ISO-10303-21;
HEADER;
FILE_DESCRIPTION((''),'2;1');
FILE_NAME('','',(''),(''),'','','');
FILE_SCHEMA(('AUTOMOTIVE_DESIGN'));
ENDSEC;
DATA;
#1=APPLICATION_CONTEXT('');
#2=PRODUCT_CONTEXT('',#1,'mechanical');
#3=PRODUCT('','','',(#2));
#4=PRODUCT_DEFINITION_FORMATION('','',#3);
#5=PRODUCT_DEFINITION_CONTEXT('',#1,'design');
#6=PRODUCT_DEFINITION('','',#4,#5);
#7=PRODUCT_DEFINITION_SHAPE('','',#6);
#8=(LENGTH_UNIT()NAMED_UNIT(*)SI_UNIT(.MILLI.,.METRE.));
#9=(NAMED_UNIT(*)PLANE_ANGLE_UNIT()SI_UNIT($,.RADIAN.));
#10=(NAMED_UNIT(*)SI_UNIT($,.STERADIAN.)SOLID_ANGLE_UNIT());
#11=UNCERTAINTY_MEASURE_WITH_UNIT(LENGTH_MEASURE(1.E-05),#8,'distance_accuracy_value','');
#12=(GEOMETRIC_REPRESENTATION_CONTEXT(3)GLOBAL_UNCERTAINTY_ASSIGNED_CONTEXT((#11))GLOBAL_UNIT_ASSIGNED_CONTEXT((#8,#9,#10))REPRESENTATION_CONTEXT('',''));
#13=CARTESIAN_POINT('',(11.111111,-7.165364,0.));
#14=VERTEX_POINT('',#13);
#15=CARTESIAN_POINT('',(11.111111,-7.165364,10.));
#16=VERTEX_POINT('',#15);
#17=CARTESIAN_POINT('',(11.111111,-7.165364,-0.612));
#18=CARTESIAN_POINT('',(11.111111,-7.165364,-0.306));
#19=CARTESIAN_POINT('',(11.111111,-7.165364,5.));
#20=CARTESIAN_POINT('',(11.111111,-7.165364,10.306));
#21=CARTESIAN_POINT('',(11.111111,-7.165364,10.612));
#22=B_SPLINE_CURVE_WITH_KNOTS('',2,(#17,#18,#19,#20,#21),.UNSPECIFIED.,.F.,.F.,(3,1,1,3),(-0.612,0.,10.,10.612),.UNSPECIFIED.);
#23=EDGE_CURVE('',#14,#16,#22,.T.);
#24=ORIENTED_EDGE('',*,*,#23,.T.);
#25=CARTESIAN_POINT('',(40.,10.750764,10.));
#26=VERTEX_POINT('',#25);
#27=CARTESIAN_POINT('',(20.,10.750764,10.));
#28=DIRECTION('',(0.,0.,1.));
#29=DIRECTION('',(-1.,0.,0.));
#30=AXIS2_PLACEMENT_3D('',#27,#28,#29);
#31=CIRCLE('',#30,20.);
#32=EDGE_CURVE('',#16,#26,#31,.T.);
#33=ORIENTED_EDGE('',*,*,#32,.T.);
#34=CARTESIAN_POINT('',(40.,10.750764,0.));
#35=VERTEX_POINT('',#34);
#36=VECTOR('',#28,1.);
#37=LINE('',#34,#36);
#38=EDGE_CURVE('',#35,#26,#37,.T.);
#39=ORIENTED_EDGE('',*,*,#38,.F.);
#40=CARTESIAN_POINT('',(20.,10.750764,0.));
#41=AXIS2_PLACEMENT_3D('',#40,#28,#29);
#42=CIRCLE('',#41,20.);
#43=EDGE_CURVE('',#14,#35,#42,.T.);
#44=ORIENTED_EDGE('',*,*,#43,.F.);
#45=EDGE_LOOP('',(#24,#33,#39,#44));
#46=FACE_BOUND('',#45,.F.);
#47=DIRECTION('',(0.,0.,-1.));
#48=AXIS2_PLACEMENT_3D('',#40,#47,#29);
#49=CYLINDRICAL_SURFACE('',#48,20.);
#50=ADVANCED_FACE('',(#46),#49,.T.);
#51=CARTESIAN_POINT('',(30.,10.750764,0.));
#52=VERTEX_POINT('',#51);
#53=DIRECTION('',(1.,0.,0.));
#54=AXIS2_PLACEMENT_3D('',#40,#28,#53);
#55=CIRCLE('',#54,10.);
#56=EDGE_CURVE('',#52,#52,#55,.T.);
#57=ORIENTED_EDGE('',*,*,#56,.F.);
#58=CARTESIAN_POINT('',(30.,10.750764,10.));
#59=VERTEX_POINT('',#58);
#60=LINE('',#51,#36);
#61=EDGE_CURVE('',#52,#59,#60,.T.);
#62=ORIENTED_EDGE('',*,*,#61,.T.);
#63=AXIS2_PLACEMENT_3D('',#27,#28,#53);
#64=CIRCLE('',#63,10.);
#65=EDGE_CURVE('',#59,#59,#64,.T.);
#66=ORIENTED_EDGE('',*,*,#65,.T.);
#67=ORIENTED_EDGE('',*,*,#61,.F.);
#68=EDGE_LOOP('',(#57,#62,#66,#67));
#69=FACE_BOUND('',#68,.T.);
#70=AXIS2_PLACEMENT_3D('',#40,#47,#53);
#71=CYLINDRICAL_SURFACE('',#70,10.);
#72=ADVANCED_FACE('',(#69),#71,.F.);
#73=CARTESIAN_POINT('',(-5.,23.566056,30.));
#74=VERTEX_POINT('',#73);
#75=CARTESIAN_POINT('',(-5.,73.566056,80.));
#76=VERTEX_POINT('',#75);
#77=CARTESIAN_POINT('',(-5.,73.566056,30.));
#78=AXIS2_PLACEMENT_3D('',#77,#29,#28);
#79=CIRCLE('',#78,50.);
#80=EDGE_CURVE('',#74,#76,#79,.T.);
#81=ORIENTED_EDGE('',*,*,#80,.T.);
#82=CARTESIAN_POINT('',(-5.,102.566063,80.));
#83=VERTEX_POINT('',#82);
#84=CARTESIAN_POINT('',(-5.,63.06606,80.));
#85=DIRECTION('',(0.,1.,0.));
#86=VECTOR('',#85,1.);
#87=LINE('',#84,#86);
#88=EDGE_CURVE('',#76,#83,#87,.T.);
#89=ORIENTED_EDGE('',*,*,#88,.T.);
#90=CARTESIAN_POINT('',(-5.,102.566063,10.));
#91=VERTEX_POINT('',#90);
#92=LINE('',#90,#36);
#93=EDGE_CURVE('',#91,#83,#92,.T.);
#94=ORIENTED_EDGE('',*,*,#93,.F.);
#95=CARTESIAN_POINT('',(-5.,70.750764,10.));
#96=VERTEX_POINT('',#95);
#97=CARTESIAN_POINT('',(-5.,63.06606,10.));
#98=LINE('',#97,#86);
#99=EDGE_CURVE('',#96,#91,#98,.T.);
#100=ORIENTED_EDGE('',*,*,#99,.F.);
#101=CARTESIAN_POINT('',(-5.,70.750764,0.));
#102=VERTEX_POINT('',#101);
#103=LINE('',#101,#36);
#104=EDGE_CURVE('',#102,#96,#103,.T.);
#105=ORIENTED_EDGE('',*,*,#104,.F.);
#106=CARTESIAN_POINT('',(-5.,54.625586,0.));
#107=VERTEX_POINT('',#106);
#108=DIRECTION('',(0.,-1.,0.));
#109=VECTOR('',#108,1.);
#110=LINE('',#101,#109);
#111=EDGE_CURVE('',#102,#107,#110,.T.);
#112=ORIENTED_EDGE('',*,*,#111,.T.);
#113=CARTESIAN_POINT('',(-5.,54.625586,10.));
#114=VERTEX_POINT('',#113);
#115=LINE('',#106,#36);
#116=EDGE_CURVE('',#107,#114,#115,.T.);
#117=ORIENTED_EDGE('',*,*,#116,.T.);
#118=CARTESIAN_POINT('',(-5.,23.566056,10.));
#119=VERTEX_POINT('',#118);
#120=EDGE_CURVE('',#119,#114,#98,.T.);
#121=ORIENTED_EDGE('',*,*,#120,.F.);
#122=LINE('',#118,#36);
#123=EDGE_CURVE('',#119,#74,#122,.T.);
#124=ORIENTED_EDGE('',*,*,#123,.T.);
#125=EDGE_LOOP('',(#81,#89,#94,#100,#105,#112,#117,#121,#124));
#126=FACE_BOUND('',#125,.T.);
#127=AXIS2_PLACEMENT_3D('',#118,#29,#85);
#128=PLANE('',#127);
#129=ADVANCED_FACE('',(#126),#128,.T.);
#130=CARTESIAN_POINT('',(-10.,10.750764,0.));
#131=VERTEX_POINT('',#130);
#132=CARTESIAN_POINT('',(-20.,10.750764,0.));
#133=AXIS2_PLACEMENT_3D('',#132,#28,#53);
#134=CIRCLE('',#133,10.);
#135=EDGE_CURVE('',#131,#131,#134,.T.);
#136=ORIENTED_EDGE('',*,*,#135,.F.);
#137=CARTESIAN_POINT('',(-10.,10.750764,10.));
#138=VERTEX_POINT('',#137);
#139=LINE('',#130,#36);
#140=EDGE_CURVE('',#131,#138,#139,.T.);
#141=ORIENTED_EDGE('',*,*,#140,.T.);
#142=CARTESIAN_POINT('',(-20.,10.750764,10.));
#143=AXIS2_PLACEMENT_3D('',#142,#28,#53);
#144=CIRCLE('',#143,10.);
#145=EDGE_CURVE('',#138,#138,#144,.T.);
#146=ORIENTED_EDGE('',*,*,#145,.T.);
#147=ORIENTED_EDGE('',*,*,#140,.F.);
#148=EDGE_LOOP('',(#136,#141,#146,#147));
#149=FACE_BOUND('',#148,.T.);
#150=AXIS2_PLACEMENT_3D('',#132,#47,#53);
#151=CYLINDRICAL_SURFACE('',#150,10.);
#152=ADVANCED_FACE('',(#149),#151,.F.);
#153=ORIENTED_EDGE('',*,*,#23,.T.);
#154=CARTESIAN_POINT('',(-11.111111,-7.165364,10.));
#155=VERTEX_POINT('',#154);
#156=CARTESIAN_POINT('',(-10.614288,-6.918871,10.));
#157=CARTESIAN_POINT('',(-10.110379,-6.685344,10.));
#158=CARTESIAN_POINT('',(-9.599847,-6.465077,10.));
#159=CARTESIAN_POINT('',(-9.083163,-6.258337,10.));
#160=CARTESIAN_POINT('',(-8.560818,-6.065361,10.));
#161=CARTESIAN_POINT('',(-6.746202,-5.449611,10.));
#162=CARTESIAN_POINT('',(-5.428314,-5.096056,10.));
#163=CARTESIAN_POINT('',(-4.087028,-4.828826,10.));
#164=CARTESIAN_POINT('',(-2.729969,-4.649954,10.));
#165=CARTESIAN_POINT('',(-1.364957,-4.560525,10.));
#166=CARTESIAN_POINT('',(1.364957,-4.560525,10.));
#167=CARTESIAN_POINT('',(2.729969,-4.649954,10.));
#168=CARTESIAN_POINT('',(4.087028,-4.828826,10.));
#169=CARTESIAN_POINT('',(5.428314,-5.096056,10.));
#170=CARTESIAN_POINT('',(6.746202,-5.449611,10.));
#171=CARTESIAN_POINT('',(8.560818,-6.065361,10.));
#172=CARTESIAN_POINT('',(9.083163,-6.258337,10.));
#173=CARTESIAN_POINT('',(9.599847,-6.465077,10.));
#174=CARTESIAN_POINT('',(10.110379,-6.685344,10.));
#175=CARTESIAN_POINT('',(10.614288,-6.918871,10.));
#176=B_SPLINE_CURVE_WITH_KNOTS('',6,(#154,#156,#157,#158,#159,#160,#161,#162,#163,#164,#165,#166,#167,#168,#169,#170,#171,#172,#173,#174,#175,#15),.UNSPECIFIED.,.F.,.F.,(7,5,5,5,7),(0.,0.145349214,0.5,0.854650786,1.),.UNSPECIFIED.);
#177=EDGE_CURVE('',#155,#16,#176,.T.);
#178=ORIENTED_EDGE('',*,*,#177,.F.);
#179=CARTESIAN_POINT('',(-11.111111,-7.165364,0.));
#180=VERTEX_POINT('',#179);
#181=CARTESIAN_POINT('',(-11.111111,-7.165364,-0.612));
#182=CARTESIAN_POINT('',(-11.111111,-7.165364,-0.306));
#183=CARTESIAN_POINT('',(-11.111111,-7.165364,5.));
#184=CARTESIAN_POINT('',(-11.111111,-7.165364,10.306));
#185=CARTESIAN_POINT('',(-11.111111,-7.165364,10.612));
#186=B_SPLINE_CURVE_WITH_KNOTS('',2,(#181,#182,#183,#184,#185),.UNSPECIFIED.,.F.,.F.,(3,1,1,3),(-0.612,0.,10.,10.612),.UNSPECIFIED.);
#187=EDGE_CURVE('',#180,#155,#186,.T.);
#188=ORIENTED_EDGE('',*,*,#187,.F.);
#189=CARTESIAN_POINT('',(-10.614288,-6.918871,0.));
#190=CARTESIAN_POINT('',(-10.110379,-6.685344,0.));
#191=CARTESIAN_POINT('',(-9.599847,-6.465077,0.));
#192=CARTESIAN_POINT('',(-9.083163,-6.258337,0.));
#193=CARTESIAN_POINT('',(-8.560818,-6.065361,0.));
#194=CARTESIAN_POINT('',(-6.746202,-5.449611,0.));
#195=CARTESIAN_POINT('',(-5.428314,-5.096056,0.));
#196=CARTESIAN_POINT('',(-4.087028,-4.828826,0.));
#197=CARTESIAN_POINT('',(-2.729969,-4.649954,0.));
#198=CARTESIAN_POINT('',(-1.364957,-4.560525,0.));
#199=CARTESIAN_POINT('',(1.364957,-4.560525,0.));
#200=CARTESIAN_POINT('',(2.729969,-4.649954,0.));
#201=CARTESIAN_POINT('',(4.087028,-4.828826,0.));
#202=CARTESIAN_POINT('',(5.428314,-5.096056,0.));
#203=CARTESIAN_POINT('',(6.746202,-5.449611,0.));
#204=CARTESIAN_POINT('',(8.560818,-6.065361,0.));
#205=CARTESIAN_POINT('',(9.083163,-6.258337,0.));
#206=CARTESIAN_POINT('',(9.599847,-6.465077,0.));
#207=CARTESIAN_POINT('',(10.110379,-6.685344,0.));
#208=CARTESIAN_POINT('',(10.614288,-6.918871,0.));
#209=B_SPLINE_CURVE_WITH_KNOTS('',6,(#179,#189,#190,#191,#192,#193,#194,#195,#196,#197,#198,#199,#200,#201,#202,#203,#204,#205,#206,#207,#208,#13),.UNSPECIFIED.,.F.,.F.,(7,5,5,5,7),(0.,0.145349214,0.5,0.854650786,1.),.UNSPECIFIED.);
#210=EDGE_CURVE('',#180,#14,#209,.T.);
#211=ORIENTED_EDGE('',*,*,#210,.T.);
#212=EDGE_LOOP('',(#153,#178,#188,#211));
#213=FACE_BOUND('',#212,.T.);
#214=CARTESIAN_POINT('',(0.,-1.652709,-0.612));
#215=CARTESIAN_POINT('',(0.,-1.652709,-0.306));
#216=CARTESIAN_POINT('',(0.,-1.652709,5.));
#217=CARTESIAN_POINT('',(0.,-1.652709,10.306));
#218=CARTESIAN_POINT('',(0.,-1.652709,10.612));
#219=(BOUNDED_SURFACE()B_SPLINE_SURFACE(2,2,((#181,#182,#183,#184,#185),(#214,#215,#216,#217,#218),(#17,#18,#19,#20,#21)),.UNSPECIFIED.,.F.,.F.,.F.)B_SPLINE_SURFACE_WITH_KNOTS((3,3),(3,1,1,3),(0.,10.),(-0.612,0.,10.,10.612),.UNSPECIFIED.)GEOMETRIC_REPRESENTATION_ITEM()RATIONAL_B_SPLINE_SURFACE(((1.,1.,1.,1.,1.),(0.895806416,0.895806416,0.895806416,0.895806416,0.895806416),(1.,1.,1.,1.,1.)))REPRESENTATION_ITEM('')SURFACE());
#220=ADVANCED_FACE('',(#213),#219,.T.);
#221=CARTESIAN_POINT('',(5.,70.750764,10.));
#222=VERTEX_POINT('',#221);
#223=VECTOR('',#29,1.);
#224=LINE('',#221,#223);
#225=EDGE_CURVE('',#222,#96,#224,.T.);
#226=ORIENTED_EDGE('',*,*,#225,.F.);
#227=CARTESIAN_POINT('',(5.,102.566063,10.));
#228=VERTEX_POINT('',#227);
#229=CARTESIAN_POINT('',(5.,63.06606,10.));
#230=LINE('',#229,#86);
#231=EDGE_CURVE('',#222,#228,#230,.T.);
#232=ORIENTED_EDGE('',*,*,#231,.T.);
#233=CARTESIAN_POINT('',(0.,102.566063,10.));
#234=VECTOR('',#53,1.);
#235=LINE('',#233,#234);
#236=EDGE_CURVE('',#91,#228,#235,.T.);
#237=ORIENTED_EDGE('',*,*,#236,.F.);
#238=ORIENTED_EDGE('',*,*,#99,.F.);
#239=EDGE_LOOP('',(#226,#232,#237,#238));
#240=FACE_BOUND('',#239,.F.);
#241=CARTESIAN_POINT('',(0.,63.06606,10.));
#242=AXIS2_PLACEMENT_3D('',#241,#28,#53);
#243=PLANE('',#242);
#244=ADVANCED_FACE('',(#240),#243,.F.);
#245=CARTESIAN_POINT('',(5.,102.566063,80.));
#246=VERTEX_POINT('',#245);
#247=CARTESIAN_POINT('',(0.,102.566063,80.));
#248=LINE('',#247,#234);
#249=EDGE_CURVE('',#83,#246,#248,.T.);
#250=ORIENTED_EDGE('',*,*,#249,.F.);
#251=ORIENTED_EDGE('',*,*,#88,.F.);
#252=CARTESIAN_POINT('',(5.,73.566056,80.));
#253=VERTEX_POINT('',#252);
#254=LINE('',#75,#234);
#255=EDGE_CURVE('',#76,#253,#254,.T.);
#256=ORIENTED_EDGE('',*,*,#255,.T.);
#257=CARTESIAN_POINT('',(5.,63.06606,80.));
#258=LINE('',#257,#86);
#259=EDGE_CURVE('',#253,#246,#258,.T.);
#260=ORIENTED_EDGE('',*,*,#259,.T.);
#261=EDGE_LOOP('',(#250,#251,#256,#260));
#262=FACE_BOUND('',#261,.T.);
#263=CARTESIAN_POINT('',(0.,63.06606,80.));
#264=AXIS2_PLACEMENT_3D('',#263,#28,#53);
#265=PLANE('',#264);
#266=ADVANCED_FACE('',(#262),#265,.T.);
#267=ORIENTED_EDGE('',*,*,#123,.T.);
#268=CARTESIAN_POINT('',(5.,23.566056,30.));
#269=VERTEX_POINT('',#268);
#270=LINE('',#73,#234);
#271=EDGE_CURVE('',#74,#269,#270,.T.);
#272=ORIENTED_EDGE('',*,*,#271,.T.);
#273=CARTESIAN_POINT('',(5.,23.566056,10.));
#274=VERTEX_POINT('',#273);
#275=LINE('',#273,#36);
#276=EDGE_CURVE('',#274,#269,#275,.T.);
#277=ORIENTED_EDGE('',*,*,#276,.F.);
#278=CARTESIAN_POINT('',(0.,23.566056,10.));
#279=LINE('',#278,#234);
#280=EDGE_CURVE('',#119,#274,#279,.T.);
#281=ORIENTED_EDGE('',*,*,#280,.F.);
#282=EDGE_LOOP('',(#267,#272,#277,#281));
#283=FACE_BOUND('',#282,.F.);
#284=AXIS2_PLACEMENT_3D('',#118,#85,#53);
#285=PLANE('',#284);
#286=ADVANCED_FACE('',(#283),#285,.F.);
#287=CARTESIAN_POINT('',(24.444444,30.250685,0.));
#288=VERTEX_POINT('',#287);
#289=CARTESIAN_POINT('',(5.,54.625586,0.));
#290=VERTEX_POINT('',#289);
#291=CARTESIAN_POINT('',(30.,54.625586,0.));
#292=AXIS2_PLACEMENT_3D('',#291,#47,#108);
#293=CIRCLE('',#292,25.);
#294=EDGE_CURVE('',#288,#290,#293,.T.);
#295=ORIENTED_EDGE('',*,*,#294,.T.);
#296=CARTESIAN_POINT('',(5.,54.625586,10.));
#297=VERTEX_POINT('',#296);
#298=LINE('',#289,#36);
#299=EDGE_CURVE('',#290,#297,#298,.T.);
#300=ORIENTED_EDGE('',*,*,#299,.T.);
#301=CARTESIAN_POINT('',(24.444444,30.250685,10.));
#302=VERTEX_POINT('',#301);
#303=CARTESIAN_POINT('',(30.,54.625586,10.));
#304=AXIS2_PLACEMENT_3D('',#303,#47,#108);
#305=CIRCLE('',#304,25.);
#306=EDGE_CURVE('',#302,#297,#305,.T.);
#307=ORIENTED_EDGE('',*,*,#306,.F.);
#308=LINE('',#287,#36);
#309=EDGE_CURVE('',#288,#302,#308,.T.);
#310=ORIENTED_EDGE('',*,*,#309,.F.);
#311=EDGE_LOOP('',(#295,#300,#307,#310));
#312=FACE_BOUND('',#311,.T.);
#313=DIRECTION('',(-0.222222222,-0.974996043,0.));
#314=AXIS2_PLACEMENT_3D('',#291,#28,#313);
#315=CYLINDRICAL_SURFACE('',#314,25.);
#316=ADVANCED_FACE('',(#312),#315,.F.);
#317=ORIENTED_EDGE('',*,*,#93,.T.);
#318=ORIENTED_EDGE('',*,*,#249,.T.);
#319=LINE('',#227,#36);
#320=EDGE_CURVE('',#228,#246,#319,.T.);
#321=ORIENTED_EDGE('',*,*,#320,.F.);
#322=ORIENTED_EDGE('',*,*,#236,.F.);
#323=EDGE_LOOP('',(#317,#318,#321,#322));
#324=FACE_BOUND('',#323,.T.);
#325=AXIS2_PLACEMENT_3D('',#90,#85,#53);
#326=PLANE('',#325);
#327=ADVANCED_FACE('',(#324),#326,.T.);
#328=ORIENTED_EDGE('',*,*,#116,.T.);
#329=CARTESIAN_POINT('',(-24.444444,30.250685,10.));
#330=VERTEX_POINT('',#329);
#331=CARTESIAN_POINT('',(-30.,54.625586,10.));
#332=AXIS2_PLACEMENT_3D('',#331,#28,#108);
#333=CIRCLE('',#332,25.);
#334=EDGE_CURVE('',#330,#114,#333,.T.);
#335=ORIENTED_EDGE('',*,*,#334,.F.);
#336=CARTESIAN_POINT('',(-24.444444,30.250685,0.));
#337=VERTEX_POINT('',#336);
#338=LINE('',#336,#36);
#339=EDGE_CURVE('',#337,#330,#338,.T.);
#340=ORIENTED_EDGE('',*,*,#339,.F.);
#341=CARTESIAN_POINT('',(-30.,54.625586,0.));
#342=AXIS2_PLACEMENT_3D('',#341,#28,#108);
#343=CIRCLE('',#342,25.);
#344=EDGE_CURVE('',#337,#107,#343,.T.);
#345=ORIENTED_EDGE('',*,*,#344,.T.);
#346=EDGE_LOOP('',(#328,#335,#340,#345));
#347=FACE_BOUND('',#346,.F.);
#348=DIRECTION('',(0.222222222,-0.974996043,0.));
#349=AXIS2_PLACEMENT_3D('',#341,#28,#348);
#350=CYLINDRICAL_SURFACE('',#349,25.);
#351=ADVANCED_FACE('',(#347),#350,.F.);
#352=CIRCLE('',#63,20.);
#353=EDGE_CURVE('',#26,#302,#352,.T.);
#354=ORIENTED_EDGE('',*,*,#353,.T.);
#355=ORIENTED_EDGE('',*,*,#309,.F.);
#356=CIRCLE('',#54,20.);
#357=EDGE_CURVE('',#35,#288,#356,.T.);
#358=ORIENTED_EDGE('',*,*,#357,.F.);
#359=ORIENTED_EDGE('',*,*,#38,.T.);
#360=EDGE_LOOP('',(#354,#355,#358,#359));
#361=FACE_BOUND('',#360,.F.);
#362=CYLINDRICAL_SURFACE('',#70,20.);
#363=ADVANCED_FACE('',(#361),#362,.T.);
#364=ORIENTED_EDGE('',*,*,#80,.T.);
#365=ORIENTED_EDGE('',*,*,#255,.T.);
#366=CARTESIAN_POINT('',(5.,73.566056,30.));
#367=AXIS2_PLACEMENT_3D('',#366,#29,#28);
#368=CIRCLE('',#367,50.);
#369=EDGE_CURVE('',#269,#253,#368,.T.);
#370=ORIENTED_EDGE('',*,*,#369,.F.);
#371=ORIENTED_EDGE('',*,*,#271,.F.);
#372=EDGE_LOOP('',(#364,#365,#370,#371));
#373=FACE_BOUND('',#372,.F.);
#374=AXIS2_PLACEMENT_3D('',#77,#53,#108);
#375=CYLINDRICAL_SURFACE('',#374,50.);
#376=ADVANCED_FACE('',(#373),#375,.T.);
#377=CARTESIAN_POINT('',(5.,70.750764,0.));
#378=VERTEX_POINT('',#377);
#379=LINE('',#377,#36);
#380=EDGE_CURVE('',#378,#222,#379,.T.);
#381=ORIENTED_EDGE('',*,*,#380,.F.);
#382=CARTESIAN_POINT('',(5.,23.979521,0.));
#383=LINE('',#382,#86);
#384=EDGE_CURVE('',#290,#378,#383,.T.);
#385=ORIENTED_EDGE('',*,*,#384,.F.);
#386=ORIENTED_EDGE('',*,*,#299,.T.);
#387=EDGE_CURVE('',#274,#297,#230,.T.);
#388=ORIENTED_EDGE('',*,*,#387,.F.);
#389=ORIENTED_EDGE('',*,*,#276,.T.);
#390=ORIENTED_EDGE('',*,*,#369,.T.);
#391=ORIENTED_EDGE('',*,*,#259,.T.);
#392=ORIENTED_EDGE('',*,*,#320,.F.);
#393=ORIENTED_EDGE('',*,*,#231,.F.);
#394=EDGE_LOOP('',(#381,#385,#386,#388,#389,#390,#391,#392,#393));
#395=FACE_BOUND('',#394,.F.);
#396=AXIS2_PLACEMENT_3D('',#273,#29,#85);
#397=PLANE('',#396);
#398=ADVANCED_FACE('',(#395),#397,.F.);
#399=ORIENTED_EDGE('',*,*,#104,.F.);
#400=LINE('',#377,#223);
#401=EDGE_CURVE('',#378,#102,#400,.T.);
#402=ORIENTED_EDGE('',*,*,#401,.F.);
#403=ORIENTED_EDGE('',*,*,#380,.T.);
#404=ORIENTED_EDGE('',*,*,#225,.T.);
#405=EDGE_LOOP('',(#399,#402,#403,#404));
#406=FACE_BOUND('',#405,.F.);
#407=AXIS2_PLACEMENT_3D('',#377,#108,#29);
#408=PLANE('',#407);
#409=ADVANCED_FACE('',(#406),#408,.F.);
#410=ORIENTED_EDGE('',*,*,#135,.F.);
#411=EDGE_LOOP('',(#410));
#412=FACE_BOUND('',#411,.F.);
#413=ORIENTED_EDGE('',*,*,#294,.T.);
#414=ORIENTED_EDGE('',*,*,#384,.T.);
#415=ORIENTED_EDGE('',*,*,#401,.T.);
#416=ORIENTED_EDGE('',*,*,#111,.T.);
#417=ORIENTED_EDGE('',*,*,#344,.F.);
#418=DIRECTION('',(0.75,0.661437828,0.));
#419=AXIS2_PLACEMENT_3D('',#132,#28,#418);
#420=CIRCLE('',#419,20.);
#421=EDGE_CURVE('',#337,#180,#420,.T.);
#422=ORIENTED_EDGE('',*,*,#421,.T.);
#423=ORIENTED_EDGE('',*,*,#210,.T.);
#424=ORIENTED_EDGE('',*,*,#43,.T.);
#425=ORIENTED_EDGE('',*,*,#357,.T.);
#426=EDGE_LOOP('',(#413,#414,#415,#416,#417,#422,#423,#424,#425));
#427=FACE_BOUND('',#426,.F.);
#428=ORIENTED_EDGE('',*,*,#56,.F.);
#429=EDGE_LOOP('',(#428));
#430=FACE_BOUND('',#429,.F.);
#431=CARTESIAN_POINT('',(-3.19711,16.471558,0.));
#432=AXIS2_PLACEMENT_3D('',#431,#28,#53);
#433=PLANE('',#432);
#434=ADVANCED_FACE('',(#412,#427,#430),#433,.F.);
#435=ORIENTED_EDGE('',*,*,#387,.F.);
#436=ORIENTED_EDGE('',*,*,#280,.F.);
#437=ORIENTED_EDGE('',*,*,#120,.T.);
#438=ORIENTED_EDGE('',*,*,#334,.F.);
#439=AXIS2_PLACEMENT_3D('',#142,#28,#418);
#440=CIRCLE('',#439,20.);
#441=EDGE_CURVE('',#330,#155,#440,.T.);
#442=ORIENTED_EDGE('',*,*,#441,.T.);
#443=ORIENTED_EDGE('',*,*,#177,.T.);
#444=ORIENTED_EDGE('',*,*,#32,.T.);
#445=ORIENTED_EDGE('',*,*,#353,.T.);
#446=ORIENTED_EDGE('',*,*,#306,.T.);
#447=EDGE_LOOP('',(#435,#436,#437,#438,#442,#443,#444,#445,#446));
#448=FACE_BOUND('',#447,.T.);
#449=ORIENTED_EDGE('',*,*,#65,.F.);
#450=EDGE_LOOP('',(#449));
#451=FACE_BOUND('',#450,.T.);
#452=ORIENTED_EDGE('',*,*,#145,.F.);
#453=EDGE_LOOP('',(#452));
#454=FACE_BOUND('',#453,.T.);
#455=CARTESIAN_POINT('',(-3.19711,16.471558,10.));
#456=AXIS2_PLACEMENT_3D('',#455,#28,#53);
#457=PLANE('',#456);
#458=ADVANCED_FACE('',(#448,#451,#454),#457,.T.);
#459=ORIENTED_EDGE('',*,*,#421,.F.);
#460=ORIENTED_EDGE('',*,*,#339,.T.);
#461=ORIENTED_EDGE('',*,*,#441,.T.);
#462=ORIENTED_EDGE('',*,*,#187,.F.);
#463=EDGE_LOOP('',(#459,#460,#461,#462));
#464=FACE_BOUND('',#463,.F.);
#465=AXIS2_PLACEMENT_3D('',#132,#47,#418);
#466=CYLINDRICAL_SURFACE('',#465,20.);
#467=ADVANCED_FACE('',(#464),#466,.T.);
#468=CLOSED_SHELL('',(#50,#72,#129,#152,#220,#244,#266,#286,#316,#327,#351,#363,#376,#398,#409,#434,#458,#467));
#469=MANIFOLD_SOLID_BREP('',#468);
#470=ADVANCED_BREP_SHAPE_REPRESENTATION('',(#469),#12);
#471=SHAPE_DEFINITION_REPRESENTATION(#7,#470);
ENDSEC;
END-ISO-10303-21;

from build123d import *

# Parameters (mm, degrees)
F0_R     = 10
F1_DEPTH = 10
F2_R     = 25
F3_R     = 25
F4_W     = 10
F4_H     = 79.0000073612
F5_DEPTH = 70
F6_R     = 50


with BuildPart() as f1:
    # F0 (on Top) → F1 (new body)
    with BuildSketch(Plane.XY):
        with BuildLine():
            Line((-5, 10.7507640496), (0, 10.7507640496))
            ThreePointArc((0, 10.7507640496), (-1.2917130661, 17.8218318615), (-5, 23.9795206049))
            Line((-5, 23.9795206049), (-5, 10.7507640496))
        make_face()
        with BuildLine():
            Line((5, 10.7507640496), (0, 10.7507640496))
            ThreePointArc((0, 10.7507640496), (20, -9.2492359504), (40, 10.7507640496))
            ThreePointArc((40, 10.7507640496), (27.0710678119, 29.4590509835), (5, 23.9795206049))
            Line((5, 23.9795206049), (5, 10.7507640496))
        make_face()
        with Locations((20, 10.7507640496)):
            Circle(F0_R, mode=Mode.SUBTRACT)
        with BuildLine():
            ThreePointArc((-5, 23.9795206049), (-1.2917130661, 17.8218318615), (0, 10.7507640496))
            ThreePointArc((0, 10.7507640496), (1.2917130661, 17.8218318615), (5, 23.9795206049))
            Line((5, 23.9795206049), (5, 70.7507640496))
            Line((5, 70.7507640496), (-5, 70.7507640496))
            Line((-5, 70.7507640496), (-5, 23.9795206049))
        make_face()
        with BuildLine():
            ThreePointArc((-5, 23.9795206049), (-38.7082869339, 3.6796962377), (0, 10.7507640496))
            Line((0, 10.7507640496), (-5, 10.7507640496))
            Line((-5, 10.7507640496), (-5, 23.9795206049))
        make_face()
        with Locations((-20, 10.7507640496)):
            Circle(F0_R, mode=Mode.SUBTRACT)
        with BuildLine():
            ThreePointArc((5, 23.9795206049), (1.2917130661, 17.8218318615), (0, 10.7507640496))
            Line((0, 10.7507640496), (5, 10.7507640496))
            Line((5, 10.7507640496), (5, 23.9795206049))
        make_face()
    extrude(amount=F1_DEPTH)

    # F2
    f2_edges = [f1.edges().sort_by_distance(p)[0] for p in [
        (0, 10.750764, 5),
    ]]
    fillet(f2_edges, radius=F2_R)

    # F3
    f3_edges = [f1.edges().sort_by_distance(p)[0] for p in [
        (-5, 23.979521, 5),
        (5, 23.979521, 5),
    ]]
    fillet(f3_edges, radius=F3_R)

    # F4 (on face) → F5 (join)
    with BuildSketch(Plane.XY.offset(10)):
        with Locations((0, 63.0660597235)):
            Rectangle(F4_W, F4_H)
    extrude(amount=F5_DEPTH)

    # F6
    f6_edges = [f1.edges().sort_by_distance(p)[0] for p in [
        (0, 23.566056, 80),
    ]]
    fillet(f6_edges, radius=F6_R)


solid = f1.part
